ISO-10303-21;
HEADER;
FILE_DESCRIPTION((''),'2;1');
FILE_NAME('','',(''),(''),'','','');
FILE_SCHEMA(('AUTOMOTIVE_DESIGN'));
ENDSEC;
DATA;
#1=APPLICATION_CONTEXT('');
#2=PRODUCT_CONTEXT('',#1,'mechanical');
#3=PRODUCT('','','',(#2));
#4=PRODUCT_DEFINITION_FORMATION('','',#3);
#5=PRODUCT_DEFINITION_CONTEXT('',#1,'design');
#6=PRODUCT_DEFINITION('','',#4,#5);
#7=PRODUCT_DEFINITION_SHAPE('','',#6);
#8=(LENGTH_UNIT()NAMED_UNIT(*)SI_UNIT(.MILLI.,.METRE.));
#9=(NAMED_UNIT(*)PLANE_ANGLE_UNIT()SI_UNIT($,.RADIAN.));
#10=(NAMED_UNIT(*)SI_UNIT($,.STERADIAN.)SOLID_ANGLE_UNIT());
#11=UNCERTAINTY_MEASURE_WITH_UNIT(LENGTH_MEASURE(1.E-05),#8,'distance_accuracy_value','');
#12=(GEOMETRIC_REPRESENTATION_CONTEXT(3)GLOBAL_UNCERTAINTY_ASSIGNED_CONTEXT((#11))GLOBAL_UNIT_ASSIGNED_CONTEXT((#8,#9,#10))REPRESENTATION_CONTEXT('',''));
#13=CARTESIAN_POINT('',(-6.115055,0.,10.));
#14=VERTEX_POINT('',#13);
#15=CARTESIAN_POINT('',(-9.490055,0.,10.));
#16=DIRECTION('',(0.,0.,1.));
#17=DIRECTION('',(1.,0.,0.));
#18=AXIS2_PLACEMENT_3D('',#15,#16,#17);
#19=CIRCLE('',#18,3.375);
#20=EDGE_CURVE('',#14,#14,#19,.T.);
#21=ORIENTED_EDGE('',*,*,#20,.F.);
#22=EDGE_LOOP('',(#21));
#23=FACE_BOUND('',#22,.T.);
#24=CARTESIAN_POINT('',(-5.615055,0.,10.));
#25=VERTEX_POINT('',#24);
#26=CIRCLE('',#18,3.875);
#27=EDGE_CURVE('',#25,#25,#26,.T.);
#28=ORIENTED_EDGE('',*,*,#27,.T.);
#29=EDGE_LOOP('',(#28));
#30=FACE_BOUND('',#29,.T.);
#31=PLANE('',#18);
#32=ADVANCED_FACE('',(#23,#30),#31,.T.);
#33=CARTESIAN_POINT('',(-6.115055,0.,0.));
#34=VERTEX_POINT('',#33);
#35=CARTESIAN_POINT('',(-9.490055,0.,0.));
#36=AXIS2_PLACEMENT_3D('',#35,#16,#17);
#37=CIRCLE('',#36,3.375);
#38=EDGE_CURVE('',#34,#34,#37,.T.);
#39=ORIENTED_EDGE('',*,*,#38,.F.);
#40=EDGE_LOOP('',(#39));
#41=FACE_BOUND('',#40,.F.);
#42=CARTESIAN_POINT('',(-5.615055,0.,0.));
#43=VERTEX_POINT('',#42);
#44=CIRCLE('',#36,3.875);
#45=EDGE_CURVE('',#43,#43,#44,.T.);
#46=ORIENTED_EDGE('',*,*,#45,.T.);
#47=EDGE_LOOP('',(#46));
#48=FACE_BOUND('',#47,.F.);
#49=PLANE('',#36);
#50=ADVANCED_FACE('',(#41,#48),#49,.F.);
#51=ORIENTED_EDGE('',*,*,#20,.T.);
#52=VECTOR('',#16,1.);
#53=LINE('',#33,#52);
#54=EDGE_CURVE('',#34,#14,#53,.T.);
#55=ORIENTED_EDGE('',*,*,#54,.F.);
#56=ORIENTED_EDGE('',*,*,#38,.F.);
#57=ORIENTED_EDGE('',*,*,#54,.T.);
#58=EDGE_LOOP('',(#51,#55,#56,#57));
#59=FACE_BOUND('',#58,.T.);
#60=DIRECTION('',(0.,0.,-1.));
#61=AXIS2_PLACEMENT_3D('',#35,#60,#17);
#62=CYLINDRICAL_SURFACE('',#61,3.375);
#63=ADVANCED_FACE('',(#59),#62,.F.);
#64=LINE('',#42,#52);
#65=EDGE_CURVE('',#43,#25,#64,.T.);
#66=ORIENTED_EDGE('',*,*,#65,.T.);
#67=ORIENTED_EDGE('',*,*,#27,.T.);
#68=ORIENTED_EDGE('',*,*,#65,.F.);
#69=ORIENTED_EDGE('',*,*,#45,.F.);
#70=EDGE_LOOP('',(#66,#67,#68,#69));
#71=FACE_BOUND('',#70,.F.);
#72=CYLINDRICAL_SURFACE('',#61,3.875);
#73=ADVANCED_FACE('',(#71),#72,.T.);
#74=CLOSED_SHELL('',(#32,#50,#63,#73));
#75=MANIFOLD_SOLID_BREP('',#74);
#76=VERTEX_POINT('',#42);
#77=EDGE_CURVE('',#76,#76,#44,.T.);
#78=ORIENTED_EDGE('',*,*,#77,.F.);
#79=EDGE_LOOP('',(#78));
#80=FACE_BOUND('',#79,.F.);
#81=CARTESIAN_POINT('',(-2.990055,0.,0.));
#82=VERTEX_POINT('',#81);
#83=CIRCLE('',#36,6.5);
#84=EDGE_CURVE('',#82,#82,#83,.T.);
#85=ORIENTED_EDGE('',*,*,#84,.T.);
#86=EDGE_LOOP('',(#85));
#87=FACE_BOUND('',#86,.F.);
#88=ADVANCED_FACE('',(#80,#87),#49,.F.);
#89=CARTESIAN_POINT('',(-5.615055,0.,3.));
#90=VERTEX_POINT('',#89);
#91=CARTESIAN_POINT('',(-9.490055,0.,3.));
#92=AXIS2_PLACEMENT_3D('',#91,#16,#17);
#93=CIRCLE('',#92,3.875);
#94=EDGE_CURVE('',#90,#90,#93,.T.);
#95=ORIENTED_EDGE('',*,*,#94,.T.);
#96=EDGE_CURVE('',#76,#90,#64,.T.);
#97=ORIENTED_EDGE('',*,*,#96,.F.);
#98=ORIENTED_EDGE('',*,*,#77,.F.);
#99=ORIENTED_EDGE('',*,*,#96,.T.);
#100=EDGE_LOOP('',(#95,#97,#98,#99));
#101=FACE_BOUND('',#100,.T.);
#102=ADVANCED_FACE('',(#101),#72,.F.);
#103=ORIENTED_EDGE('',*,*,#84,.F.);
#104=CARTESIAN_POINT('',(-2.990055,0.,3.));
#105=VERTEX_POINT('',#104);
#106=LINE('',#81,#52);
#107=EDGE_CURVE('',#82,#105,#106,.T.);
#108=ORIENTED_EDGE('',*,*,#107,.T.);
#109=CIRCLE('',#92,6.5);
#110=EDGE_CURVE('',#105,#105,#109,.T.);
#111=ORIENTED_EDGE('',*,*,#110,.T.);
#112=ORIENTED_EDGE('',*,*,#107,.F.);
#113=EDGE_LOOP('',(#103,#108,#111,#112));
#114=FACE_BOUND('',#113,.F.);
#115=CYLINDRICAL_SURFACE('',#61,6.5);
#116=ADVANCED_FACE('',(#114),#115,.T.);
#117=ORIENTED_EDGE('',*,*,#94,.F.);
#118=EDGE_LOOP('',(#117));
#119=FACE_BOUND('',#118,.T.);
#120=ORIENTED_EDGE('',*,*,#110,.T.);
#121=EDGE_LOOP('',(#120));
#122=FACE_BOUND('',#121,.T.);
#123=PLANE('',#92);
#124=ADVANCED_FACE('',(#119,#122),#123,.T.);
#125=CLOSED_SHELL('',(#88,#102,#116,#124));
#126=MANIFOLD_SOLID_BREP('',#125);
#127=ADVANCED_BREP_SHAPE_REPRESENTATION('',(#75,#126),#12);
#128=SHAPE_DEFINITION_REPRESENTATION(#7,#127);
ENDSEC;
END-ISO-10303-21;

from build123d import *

# Parameters (mm, degrees)
F0_R     = 6.5
F0_R_2   = 3.875
F1_DEPTH = 3
F0_R_3   = 3.375
F2_DEPTH = 10


# Not quite as in the source:
# - a feature names something its author has since deleted; it is built from what else it names


with BuildPart() as f1:
    # F0 (on Top) → F1 (new body)
    with BuildSketch(Plane.XY):
        with Locations((-9.4900550321, 0)):
            Circle(F0_R)
        with Locations((-9.4900550321, 0)):
            Circle(F0_R_2, mode=Mode.SUBTRACT)
    extrude(amount=F1_DEPTH)


with BuildPart() as f2:
    # F0 (on Top) → F2 (new body)
    with BuildSketch(Plane.XY):
        with Locations((-9.4900550321, 0)):
            Circle(F0_R_2)
        with Locations((-9.4900550321, 0)):
            Circle(F0_R_3, mode=Mode.SUBTRACT)
    extrude(amount=F2_DEPTH)


solid = Compound([f1.part, f2.part])
